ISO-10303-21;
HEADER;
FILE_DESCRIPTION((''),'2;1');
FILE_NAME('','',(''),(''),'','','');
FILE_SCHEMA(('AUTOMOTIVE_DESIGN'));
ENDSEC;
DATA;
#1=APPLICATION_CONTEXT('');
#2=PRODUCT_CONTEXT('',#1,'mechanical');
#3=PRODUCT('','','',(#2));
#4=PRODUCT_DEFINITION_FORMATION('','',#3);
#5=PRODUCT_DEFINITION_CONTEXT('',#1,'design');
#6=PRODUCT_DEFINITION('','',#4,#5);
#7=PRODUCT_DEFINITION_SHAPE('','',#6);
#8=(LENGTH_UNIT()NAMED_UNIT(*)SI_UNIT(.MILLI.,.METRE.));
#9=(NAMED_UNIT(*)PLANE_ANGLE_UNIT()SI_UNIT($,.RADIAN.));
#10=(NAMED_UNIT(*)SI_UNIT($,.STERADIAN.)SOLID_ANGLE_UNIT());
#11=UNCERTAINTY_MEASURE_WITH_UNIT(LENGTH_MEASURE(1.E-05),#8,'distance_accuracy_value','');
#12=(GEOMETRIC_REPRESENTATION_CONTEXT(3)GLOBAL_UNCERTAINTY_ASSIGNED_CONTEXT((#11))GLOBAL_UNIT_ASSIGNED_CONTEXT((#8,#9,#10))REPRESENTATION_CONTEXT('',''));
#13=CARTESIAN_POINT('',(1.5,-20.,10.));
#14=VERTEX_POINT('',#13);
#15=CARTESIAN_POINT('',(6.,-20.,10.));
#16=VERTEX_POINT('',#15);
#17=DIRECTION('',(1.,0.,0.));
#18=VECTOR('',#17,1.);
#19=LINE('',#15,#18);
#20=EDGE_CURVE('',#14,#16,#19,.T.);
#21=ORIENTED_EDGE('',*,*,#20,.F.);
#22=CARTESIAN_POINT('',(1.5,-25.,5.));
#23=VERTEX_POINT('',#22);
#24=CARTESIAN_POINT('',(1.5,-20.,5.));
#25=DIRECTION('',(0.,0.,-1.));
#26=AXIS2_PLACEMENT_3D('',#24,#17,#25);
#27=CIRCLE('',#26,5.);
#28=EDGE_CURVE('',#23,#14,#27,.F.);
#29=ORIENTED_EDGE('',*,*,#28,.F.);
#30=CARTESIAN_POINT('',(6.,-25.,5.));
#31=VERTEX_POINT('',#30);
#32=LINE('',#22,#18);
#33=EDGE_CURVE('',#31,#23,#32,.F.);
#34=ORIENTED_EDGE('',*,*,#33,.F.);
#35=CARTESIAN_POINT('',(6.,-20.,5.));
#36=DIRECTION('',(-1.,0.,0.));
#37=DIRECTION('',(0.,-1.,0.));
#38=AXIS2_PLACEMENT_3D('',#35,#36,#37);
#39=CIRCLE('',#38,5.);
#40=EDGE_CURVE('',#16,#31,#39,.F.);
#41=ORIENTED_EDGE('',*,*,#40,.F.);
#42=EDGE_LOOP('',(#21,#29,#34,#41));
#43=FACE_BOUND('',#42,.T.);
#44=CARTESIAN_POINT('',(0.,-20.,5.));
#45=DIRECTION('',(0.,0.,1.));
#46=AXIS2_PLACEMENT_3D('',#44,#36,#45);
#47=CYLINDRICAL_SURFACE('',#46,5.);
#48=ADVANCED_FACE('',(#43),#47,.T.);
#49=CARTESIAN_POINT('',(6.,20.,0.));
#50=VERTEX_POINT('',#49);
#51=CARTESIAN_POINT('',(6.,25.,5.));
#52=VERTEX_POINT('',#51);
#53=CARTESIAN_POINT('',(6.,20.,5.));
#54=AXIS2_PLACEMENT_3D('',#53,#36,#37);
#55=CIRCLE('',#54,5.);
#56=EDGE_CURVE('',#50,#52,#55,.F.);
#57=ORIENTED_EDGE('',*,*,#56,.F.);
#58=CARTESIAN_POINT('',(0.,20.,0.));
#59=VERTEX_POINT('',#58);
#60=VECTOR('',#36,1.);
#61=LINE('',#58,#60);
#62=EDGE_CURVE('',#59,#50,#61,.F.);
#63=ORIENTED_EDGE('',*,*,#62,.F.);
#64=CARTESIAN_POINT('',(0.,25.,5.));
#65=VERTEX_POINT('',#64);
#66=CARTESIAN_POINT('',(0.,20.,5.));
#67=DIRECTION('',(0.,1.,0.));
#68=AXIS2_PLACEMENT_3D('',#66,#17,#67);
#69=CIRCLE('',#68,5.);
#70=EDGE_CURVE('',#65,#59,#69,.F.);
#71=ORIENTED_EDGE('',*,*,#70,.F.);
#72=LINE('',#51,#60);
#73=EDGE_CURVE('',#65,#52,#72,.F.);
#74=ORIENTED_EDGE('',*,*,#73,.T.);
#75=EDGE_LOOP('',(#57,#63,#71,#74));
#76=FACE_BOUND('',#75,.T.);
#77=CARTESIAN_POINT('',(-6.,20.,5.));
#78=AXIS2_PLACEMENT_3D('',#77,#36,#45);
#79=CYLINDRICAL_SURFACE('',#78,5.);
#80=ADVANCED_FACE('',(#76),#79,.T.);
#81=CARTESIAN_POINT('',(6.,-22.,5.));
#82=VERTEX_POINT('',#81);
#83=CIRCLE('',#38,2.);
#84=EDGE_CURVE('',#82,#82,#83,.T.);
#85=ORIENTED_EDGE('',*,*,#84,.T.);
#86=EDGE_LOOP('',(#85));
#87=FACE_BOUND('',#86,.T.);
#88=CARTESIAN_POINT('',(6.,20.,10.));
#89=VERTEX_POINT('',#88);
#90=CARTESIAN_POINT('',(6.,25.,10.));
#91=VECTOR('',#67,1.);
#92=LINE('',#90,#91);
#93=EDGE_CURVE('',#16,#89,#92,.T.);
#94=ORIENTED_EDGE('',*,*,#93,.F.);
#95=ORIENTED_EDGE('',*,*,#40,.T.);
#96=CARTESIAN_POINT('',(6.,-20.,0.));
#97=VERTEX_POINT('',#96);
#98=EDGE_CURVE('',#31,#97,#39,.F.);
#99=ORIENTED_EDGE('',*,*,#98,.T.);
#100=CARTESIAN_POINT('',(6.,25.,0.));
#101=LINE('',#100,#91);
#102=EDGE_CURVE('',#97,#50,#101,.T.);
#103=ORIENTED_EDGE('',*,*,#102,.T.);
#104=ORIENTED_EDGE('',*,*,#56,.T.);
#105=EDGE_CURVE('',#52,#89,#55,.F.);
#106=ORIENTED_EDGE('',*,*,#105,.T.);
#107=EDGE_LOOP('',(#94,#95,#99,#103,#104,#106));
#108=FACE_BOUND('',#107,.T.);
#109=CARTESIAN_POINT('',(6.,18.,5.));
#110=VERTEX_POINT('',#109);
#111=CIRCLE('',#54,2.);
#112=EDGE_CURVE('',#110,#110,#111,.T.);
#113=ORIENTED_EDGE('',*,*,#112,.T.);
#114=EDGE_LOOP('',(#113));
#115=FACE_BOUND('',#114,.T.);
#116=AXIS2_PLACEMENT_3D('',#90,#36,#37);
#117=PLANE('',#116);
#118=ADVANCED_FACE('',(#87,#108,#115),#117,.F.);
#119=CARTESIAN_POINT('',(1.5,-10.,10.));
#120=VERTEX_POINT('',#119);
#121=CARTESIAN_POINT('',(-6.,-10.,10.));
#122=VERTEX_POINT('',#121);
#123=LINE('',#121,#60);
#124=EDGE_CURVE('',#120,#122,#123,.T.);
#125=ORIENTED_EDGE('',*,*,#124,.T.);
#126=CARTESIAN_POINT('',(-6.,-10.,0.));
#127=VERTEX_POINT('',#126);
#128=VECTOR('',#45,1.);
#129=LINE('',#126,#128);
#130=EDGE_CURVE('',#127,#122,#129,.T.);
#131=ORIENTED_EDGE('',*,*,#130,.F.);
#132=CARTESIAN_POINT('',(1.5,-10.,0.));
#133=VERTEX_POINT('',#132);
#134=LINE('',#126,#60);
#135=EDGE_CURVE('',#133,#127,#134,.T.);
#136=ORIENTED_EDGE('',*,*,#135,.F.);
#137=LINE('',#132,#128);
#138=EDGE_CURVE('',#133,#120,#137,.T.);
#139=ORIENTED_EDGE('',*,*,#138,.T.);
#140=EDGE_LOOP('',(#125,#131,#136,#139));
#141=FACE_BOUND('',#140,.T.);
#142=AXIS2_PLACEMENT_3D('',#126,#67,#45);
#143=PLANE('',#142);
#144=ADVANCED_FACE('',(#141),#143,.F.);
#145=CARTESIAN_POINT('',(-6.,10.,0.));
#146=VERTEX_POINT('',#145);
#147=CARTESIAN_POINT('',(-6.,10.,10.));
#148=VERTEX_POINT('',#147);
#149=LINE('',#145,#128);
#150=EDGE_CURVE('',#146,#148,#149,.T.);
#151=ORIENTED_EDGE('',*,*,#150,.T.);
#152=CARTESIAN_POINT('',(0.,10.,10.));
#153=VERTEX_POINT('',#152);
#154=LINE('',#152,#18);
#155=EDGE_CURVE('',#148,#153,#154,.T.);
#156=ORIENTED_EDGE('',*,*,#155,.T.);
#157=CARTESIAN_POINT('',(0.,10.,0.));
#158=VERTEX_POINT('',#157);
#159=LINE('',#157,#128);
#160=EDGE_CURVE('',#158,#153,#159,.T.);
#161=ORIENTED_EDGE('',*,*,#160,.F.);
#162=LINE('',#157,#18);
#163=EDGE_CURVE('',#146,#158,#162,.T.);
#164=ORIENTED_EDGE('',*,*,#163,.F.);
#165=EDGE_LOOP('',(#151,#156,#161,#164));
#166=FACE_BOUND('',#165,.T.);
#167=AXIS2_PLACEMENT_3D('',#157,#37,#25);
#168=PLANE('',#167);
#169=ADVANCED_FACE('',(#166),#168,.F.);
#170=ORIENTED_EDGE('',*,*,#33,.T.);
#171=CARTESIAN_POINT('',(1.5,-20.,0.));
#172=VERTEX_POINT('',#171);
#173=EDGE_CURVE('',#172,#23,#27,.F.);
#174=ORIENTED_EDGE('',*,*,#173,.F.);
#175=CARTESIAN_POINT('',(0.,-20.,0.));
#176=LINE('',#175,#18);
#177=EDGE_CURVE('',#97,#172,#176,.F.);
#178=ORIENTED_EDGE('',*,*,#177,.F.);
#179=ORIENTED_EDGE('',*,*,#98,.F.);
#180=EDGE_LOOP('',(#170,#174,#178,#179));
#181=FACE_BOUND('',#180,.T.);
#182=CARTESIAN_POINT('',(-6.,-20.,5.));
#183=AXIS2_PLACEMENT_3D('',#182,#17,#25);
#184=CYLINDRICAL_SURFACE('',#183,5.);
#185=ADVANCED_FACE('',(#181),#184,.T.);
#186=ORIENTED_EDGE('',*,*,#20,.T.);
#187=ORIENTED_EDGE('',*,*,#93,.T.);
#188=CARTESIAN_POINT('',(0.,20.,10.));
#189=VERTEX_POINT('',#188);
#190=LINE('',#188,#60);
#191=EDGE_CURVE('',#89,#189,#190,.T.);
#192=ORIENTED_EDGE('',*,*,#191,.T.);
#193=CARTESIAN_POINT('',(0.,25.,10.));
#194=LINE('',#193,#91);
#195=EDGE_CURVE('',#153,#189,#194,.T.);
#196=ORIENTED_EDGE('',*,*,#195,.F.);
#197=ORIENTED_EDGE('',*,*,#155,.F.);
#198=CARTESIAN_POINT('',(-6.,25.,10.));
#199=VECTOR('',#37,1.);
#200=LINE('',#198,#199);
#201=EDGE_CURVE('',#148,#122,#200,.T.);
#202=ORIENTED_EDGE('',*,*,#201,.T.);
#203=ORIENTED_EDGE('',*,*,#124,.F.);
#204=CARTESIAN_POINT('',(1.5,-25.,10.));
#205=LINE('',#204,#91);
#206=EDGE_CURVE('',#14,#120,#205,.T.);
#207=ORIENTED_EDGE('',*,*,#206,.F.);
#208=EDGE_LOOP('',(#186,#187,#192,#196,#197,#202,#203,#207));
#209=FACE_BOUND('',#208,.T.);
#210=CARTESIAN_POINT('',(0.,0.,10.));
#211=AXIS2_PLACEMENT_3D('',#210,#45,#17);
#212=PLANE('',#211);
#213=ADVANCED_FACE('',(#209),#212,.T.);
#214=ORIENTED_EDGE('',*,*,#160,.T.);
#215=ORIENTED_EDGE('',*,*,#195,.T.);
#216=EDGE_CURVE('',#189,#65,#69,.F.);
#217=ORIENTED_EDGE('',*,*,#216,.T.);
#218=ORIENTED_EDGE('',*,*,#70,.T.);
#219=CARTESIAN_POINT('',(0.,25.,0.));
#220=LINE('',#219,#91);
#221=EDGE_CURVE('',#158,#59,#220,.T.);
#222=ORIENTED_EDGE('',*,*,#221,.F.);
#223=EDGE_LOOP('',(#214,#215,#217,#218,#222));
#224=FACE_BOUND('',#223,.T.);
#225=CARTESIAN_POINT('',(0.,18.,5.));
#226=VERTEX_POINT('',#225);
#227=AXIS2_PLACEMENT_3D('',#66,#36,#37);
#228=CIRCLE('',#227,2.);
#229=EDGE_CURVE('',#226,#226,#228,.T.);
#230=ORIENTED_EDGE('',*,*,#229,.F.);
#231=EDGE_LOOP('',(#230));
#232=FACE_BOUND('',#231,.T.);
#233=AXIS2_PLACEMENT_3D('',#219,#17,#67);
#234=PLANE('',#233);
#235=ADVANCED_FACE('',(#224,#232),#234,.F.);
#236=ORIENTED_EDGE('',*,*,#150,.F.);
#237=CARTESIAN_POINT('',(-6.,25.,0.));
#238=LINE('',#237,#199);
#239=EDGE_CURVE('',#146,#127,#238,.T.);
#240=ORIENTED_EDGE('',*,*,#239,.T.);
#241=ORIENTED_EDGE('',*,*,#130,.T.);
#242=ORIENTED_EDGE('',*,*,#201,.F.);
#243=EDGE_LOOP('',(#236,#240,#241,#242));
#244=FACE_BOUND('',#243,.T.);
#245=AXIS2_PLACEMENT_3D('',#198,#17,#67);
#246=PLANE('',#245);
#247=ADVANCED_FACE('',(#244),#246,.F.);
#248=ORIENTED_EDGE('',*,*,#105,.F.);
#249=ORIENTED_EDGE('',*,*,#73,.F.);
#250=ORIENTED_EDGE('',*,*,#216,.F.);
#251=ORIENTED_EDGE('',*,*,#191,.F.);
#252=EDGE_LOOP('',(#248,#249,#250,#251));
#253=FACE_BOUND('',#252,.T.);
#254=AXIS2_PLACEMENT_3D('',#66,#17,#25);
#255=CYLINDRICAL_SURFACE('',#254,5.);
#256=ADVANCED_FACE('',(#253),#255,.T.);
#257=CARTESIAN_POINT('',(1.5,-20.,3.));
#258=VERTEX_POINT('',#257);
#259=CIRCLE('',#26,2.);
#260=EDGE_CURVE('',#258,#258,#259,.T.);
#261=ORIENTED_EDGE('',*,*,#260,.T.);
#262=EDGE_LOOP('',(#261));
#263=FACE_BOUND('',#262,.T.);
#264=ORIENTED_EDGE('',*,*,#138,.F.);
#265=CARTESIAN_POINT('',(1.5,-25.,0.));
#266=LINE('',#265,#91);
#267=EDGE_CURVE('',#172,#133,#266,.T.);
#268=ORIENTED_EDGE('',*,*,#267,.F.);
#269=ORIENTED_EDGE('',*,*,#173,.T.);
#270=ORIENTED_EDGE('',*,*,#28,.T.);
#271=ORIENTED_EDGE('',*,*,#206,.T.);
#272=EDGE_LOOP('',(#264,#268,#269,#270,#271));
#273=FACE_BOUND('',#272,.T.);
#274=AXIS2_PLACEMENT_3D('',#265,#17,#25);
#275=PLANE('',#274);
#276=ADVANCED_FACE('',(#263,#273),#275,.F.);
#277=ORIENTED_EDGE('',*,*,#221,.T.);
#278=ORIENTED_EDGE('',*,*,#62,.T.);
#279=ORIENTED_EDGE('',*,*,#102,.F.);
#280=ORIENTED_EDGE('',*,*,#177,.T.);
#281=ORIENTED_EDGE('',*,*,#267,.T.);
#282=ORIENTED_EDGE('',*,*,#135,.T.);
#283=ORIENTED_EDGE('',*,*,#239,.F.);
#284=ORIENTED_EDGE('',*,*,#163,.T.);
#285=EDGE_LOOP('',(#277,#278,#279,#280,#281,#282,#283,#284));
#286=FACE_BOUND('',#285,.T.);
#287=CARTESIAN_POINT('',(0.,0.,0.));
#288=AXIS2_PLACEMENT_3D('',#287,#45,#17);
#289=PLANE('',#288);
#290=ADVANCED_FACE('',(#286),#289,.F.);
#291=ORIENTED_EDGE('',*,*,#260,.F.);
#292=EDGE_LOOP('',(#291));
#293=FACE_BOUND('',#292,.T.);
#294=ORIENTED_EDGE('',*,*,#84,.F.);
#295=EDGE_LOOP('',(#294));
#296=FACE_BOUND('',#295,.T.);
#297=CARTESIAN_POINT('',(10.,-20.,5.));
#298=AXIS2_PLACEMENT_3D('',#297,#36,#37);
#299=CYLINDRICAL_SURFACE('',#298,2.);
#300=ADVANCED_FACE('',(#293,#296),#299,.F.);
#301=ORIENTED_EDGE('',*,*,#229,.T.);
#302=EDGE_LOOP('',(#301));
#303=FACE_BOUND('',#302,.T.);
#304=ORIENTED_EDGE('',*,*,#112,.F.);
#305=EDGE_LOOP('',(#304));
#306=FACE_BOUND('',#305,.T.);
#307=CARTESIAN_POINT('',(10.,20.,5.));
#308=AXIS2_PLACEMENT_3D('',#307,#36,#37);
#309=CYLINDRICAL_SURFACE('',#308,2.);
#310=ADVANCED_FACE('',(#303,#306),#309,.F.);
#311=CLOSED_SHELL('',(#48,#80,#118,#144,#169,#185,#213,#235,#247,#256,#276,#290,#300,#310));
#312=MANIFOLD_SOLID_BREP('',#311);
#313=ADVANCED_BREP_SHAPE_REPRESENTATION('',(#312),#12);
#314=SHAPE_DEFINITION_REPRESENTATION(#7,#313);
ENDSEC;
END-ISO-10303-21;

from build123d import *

# Parameters (mm, degrees)
SKETCH1_W           = 12
SKETCH1_H           = 50
BOSS_EXTRUDE1_DEPTH = 10
SKETCH2_W           = 7.5
SKETCH2_H           = 15
SKETCH2_W_2         = 6
CUT_EXTRUDE1_DEPTH  = 10
SKETCH3_R           = 2
CUT_EXTRUDE2_DEPTH  = 10
FILLET1_R           = 5


with BuildPart() as part:
    # Sketch1 → Boss-Extrude1 (new body)
    with BuildSketch(Plane.XY):
        Rectangle(SKETCH1_W, SKETCH1_H)
    extrude(amount=BOSS_EXTRUDE1_DEPTH)

    # Sketch2 → Cut-Extrude1 (cut)
    with BuildSketch(Plane.XY.offset(10)):
        with Locations((-2.25, -17.5)):
            Rectangle(SKETCH2_W, SKETCH2_H)
        with Locations((-3, 17.5)):
            Rectangle(SKETCH2_W_2, SKETCH2_H)
    extrude(amount=-CUT_EXTRUDE1_DEPTH, mode=Mode.SUBTRACT)

    # Sketch3 → Cut-Extrude2 (cut)
    with BuildSketch(Plane.ZY):
        with Locations(Location((5, 20, 0), (0, 0, 270))):
            Circle(SKETCH3_R)
        with Locations(Location((5, -20, 0), (0, 0, 270))):
            Circle(SKETCH3_R)
    extrude(amount=-CUT_EXTRUDE2_DEPTH, mode=Mode.SUBTRACT)

    # Fillet1
    fillet1_edges = [part.edges().sort_by_distance(p)[0] for p in [
        (3.75, -25, 0),
        (3.75, -25, 10),
        (3, 25, 0),
        (3, 25, 10),
    ]]
    fillet(fillet1_edges, radius=FILLET1_R - 0.0001)  # a hair under: the kernel refuses the full size


solid = part.part
